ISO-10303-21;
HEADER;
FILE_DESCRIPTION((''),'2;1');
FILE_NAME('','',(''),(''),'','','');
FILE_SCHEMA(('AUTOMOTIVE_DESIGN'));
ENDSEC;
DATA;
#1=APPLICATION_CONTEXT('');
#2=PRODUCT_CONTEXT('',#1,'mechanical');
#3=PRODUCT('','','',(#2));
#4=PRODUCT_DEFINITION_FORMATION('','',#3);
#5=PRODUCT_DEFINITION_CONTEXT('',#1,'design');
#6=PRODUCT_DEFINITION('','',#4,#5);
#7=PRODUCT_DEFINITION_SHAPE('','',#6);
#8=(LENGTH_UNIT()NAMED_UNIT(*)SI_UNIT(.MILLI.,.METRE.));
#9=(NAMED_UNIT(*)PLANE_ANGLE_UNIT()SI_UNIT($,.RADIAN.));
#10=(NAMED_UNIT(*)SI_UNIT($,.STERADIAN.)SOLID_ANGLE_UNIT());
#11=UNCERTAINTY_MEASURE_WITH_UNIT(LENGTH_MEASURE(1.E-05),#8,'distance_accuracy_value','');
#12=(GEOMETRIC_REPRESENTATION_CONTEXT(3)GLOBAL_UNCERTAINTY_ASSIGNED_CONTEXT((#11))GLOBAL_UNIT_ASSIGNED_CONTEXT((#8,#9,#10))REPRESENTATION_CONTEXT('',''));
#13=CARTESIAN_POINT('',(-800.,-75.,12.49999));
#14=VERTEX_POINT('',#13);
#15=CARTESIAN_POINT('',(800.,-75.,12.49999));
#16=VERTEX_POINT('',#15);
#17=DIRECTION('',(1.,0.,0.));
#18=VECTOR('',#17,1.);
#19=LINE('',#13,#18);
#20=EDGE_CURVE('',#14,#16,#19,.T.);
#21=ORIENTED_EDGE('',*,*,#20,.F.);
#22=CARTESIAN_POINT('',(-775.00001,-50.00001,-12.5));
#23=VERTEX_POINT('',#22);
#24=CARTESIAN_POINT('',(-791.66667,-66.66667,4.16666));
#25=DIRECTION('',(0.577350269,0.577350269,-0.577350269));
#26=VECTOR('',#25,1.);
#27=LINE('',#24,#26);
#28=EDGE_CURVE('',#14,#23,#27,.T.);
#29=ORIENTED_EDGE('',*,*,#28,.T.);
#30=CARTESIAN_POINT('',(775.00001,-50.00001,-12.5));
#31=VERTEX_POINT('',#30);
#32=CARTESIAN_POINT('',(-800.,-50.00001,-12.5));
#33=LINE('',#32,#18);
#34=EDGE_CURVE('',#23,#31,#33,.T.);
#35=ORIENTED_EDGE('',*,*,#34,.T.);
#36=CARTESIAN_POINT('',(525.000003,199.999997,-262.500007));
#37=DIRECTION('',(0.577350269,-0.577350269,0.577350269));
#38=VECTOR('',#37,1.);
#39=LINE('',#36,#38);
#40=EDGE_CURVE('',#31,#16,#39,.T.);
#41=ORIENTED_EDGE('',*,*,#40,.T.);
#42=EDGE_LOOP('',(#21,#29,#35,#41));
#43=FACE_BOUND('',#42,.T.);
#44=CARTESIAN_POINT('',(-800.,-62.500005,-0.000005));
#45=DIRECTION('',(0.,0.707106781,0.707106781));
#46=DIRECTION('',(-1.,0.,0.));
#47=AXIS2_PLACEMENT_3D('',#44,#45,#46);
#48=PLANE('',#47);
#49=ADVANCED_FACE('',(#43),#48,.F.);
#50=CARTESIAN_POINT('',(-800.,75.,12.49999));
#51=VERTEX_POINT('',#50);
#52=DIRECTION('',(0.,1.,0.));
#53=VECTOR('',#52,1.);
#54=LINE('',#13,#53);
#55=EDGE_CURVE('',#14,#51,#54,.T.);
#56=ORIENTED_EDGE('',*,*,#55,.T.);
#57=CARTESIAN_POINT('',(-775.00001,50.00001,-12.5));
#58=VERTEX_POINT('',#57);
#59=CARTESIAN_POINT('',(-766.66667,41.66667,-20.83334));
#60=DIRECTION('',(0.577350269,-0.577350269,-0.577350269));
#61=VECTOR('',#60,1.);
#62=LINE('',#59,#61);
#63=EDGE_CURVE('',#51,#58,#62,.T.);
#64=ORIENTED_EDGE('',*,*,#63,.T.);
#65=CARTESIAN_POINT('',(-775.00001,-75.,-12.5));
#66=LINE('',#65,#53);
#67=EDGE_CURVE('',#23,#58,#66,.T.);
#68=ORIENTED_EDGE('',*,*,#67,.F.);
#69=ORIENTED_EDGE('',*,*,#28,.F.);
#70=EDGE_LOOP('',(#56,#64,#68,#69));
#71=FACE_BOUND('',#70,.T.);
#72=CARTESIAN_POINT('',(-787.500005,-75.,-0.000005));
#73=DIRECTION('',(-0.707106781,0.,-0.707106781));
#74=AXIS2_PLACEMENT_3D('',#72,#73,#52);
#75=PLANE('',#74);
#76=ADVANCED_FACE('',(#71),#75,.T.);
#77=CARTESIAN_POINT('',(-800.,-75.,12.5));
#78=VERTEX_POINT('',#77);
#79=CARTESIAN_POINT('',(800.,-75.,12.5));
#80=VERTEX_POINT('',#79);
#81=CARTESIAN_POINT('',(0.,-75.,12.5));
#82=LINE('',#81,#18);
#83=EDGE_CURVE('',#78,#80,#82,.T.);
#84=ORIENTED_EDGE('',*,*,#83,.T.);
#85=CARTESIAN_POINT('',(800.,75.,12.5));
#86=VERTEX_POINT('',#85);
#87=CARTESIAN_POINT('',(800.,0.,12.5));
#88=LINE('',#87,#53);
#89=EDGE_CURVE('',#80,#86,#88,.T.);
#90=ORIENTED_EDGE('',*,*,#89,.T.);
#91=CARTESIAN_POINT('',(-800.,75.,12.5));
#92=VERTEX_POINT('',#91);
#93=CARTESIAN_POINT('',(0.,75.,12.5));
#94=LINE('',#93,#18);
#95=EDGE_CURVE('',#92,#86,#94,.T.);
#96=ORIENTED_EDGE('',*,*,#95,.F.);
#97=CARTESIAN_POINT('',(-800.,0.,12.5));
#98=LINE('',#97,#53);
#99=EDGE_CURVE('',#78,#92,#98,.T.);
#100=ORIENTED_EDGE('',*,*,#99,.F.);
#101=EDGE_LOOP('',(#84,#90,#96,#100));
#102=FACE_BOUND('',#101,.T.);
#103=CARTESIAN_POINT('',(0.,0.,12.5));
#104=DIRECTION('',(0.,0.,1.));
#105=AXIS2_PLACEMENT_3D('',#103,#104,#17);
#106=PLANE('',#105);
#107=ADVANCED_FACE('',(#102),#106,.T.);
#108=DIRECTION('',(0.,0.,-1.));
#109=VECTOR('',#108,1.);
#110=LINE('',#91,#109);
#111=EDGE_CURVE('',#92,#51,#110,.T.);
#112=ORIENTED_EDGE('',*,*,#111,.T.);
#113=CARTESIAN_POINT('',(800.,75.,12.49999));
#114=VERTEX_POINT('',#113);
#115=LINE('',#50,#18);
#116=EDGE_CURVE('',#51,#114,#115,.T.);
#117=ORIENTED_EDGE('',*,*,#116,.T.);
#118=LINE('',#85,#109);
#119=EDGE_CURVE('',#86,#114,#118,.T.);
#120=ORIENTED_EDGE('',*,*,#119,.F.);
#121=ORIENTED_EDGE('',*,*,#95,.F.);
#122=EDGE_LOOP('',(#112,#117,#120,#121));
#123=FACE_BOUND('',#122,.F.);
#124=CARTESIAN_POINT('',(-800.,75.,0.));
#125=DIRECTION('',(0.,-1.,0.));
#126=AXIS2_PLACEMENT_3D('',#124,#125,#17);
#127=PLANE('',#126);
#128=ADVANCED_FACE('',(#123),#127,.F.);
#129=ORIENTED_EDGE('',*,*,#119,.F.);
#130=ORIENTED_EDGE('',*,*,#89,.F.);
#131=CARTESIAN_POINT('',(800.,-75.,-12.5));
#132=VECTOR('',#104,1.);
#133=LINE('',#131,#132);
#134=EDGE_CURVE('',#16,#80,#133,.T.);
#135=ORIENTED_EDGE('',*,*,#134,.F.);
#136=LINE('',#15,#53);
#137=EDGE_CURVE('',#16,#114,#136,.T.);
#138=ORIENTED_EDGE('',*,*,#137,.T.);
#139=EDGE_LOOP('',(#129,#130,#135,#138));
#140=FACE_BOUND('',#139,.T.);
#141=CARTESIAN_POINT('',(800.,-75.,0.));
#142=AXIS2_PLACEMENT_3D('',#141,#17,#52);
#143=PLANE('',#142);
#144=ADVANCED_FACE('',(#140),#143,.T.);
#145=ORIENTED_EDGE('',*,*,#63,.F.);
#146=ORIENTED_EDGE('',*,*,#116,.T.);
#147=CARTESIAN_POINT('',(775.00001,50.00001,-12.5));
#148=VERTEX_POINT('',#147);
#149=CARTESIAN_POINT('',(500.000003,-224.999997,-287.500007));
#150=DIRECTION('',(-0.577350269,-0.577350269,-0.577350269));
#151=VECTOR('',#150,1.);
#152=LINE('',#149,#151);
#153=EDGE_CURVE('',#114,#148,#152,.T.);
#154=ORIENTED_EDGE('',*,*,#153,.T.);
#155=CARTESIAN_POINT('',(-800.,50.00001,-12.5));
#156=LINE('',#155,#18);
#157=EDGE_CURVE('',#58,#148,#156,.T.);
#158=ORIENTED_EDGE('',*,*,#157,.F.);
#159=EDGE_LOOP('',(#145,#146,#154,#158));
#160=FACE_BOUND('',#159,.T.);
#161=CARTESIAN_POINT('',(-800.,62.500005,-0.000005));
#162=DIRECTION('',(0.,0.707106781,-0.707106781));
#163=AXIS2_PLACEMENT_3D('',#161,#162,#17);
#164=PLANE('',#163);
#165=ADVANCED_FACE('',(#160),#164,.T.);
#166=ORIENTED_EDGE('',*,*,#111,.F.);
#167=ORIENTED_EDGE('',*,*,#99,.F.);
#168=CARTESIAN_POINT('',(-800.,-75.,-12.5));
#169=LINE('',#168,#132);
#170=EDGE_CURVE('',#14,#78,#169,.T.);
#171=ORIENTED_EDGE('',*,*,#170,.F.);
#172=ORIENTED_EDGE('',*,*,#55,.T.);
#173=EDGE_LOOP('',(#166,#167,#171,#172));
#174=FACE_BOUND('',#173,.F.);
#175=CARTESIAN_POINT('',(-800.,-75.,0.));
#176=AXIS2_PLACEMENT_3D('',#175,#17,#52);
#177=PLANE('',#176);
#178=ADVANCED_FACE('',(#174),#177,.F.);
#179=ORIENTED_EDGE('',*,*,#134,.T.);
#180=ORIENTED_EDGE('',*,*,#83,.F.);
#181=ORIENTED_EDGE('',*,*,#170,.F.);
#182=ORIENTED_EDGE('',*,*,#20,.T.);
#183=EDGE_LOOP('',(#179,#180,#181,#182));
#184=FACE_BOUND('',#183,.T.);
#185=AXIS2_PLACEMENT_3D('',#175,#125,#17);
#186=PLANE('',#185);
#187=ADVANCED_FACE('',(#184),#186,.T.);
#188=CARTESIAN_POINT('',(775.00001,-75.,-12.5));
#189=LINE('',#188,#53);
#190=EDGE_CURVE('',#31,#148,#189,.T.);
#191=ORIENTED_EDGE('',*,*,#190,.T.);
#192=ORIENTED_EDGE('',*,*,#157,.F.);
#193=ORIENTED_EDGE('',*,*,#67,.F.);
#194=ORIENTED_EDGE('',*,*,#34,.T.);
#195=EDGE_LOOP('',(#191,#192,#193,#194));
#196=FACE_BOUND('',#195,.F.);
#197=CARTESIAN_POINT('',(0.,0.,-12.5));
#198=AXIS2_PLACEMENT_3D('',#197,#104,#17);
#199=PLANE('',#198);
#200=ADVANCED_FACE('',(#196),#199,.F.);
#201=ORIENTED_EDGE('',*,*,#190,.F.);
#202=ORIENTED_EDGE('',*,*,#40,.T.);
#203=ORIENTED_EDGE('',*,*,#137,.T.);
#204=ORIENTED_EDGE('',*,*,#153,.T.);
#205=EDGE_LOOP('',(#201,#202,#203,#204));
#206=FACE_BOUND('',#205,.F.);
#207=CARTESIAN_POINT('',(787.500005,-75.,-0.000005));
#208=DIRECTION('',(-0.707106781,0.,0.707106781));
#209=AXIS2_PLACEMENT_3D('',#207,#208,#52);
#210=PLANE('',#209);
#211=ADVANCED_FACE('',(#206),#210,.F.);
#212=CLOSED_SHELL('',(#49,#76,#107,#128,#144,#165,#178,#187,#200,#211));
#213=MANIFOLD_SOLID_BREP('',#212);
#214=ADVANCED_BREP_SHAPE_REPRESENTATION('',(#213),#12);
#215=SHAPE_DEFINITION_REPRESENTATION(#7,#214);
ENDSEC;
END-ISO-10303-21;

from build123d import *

# Parameters (mm, degrees)
F0_W     = 1600
F0_H     = 150
F1_DEPTH = 12.5
F2_SIZE  = 24.99999


# Not quite as in the source:
# - a fillet or chamfer is up to 0.001 mm smaller than in the source, because OpenCascade refuses the exact size


with BuildPart() as f1:
    # F0 (on Top) → F1 (new body, symmetric)
    with BuildSketch(Plane.XY):
        Rectangle(F0_W, F0_H)
    extrude(amount=F1_DEPTH, both=True)

    # F2 (size 25 in the source; OpenCascade refuses exactly that, so slightly less here)
    f2_edges = [f1.edges().sort_by_distance(p)[0] for p in [
        (0, 75, -12.5),
        (-800, 0, -12.5),
        (0, -75, -12.5),
        (800, 0, -12.5),
    ]]
    chamfer(f2_edges, length=F2_SIZE)


solid = f1.part
